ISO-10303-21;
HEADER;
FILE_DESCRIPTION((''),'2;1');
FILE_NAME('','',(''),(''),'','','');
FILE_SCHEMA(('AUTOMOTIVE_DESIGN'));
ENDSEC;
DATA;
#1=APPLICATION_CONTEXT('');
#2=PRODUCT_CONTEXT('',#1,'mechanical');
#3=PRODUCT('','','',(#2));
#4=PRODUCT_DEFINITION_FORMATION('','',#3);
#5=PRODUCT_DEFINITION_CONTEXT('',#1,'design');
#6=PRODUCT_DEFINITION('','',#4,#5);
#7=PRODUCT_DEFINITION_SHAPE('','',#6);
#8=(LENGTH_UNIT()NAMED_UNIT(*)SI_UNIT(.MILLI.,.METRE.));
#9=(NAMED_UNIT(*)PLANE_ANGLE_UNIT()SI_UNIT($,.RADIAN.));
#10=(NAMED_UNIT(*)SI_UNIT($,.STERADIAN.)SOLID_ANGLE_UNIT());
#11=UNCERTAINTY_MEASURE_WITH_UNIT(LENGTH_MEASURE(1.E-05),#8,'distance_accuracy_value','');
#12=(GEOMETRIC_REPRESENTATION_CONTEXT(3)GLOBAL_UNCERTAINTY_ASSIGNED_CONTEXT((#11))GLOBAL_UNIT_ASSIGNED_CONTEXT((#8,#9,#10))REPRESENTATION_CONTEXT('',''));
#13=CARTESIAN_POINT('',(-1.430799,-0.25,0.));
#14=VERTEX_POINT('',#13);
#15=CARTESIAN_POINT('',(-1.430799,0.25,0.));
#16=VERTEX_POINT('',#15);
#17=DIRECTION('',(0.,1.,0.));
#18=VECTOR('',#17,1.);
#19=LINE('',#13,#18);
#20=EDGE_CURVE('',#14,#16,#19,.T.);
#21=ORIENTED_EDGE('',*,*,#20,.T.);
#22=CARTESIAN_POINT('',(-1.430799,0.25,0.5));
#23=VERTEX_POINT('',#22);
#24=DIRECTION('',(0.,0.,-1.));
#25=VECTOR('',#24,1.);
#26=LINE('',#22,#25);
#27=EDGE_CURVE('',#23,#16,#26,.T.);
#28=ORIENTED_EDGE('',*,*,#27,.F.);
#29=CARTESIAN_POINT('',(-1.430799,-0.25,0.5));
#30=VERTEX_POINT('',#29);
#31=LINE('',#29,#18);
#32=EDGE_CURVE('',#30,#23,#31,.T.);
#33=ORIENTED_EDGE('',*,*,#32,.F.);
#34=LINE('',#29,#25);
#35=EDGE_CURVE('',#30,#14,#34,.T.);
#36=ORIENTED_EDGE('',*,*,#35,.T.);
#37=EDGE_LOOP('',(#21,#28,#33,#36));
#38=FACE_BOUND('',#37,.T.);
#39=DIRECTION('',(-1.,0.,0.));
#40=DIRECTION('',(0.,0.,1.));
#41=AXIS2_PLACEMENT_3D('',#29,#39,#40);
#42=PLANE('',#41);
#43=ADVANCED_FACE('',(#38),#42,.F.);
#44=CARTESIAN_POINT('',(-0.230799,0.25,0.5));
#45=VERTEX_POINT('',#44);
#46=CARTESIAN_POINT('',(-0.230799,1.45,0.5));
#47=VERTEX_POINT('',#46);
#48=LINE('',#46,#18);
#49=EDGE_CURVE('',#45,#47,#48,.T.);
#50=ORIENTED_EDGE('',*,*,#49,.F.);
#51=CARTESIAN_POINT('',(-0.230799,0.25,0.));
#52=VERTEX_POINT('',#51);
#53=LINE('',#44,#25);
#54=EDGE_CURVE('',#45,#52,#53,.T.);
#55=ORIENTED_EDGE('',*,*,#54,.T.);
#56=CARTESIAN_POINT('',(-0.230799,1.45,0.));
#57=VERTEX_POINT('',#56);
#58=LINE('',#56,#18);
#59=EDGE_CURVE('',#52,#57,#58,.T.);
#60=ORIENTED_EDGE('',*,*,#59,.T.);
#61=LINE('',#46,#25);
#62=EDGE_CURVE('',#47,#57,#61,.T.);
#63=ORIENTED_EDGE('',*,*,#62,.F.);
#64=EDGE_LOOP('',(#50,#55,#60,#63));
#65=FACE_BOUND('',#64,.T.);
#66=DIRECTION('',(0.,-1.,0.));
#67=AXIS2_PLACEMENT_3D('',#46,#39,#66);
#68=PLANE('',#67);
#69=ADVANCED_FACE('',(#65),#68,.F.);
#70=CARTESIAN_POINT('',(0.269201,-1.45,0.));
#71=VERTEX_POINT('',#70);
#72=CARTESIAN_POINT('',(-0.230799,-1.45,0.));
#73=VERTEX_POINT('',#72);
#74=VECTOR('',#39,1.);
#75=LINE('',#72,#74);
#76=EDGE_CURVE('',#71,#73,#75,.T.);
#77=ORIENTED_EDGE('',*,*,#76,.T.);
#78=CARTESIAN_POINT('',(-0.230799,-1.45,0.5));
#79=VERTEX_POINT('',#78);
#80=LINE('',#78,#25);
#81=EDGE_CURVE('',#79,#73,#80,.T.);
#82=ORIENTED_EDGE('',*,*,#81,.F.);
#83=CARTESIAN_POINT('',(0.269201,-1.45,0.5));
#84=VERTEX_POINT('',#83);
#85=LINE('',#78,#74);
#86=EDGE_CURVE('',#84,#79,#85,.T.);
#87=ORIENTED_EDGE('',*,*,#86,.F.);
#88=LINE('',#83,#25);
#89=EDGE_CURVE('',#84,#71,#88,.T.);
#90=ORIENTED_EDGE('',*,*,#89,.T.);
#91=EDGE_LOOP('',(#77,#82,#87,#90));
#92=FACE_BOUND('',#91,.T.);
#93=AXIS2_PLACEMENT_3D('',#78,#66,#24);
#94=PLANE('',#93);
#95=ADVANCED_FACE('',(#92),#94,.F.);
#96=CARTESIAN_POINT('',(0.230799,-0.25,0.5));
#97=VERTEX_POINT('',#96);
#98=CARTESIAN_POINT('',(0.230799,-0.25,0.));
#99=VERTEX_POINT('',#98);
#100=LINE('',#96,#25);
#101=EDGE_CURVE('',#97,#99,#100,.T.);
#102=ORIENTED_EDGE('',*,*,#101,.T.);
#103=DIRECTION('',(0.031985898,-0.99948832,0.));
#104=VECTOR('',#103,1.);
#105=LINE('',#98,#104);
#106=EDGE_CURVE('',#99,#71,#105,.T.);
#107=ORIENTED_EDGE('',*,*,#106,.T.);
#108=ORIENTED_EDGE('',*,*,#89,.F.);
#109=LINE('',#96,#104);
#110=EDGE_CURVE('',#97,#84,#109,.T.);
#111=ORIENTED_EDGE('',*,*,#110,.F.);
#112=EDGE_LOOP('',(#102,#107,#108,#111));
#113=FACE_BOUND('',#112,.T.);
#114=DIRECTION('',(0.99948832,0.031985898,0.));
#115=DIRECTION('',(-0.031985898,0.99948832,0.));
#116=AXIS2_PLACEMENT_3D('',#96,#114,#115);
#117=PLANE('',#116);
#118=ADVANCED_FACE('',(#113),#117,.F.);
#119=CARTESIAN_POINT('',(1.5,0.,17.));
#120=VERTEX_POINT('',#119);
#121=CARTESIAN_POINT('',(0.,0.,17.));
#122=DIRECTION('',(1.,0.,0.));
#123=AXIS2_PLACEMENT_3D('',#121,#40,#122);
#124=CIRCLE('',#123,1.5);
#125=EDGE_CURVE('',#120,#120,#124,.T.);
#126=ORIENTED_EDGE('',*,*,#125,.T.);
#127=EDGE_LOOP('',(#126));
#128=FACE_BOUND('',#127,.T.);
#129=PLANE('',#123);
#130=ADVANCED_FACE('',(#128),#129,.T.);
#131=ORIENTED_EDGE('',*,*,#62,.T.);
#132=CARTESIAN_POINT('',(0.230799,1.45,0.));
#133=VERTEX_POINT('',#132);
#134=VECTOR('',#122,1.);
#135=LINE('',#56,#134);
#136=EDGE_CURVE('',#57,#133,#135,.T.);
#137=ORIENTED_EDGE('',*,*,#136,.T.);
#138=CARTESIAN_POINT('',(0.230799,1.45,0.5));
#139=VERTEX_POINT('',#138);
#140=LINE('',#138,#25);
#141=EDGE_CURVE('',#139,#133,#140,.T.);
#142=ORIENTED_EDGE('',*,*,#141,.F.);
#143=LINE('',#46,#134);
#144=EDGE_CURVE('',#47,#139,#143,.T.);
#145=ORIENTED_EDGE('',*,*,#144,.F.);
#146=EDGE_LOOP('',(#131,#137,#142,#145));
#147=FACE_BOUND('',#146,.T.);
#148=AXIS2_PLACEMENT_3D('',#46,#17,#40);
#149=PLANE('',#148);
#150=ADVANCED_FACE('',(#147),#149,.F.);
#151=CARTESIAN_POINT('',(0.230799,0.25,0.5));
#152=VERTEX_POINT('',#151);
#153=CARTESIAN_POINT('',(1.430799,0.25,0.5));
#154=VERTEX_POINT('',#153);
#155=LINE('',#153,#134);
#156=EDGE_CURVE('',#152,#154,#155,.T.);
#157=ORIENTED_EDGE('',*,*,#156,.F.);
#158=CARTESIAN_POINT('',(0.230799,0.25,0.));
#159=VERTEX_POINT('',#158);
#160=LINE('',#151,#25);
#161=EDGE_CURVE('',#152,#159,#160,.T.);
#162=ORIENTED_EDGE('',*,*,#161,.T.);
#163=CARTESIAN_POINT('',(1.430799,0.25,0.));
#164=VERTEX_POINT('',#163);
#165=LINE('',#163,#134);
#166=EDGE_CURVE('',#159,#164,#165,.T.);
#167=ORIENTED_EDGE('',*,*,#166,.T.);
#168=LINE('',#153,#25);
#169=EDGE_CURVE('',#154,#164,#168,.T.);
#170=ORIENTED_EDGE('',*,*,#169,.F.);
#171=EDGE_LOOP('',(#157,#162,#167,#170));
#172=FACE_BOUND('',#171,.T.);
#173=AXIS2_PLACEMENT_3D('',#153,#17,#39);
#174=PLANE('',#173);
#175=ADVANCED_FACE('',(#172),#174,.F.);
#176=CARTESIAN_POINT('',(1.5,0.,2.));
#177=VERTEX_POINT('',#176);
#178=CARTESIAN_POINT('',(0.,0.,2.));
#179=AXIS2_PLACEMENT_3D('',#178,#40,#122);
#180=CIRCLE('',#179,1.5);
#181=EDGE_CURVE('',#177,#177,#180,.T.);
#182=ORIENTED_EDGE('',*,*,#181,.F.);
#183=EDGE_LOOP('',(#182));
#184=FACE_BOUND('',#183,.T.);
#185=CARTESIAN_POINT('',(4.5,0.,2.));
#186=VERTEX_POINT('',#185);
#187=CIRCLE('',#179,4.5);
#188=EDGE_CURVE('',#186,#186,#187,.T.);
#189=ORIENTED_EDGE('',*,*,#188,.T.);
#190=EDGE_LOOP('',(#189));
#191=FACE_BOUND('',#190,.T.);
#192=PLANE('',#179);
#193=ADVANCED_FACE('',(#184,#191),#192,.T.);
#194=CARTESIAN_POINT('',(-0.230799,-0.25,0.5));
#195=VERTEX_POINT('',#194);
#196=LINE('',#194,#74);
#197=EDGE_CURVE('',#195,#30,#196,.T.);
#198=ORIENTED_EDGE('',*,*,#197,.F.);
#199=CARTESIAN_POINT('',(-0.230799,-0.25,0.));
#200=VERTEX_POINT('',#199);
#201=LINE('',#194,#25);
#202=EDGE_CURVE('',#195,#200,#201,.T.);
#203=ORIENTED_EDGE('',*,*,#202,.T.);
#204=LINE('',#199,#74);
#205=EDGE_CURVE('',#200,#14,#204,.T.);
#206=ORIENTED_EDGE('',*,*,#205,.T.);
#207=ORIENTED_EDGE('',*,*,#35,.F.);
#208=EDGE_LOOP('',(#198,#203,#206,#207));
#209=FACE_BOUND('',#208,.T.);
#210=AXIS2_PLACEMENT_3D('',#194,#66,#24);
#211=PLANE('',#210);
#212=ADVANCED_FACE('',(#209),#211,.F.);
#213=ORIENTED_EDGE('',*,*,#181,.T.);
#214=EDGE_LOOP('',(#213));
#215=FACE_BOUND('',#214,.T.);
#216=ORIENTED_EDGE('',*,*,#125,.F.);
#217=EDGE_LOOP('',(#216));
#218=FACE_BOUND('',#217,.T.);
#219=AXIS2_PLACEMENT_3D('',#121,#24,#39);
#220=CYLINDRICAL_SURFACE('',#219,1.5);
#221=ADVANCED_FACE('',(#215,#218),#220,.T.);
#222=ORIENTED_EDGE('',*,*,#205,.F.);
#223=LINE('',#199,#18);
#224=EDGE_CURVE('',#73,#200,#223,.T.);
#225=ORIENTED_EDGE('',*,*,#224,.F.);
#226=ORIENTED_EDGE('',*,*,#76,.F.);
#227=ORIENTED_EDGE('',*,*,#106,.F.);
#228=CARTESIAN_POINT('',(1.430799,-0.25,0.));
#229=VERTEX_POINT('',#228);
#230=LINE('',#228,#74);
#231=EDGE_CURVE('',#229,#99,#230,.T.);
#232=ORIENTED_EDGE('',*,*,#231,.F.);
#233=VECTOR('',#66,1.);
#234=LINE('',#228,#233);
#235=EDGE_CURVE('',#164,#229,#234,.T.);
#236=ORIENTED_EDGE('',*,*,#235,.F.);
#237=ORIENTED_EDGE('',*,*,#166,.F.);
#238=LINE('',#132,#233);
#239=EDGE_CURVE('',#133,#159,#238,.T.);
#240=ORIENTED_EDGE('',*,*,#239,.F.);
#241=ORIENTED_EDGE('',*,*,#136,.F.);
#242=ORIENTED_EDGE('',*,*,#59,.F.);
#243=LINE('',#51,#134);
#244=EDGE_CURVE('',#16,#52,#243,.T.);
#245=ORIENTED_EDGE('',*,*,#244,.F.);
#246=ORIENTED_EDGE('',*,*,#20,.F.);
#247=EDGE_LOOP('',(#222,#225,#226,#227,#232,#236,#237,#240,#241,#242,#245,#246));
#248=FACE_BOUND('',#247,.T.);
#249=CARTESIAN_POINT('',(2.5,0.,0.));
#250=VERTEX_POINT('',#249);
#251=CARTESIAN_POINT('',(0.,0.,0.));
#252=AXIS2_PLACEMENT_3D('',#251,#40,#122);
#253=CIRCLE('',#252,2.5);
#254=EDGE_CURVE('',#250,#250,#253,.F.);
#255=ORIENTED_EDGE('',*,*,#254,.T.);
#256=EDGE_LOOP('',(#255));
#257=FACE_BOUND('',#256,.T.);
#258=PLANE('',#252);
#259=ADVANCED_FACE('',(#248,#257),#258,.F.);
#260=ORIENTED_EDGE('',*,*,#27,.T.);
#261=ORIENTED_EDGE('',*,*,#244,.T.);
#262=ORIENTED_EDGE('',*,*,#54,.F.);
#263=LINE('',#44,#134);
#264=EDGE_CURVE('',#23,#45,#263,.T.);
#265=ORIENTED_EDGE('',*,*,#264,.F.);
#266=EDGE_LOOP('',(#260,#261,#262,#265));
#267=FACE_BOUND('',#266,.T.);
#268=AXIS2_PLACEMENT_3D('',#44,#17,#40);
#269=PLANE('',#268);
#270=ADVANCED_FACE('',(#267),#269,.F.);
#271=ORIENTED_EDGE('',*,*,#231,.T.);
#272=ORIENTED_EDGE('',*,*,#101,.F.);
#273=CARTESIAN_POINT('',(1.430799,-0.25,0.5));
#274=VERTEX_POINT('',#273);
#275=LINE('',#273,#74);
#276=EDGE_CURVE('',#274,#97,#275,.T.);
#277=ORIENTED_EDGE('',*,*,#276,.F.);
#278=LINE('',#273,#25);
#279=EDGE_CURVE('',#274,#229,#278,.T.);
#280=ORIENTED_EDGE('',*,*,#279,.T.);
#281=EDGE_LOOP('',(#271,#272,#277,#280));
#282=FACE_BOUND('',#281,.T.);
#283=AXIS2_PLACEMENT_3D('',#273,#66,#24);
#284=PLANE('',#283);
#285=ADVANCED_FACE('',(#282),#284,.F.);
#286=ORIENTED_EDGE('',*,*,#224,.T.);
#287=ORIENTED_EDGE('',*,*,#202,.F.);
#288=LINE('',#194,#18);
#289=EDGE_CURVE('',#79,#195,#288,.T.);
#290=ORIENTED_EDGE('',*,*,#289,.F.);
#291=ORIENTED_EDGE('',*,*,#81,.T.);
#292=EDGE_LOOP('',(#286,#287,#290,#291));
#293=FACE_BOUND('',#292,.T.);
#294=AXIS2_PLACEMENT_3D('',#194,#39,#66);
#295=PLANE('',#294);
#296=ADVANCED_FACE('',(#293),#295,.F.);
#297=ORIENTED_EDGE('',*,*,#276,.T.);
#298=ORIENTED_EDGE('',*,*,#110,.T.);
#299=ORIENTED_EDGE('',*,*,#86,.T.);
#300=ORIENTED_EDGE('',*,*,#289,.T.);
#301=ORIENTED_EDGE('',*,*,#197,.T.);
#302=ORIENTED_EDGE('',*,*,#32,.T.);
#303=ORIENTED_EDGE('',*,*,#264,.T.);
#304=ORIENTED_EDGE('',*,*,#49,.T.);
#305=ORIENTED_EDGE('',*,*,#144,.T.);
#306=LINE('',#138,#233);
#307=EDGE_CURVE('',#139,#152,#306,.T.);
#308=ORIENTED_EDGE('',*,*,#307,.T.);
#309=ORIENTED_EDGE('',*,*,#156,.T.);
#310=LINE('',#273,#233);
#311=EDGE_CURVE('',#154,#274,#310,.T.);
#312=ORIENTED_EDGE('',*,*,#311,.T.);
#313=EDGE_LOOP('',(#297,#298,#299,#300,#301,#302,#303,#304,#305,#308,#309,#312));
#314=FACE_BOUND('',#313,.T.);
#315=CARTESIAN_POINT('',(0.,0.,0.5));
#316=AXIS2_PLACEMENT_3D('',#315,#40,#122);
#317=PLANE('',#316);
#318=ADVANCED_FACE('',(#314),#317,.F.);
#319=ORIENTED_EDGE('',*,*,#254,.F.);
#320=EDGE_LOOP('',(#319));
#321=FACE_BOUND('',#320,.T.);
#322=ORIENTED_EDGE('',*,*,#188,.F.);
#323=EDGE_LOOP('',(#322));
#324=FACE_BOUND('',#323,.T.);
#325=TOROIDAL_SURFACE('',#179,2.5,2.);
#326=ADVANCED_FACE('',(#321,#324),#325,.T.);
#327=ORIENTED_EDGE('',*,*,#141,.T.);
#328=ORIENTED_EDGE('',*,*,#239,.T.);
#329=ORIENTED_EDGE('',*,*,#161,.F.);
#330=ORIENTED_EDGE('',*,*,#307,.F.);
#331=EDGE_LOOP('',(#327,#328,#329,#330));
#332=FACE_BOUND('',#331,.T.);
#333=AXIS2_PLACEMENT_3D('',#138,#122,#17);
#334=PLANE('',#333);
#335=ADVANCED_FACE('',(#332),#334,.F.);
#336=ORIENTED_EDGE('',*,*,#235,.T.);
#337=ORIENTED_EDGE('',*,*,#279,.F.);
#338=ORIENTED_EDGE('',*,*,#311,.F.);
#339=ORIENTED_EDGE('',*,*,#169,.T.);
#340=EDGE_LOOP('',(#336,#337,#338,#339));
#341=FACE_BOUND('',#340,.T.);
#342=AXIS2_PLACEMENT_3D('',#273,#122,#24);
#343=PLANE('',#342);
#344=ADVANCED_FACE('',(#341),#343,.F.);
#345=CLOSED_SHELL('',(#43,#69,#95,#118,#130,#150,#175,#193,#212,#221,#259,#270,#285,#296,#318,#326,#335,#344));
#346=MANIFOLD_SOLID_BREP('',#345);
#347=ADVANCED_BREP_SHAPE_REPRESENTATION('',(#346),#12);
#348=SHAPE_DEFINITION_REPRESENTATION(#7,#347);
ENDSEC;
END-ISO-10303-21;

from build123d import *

# Parameters (mm, degrees)
SKETCH1_R           = 4.5
BOSS_EXTRUDE1_DEPTH = 2
FILLET1_R           = 2
CUT_EXTRUDE1_DEPTH  = 0.5
SKETCH3_R           = 1.5
BOSS_EXTRUDE2_DEPTH = 15


with BuildPart() as part:
    # Sketch1 → Boss-Extrude1 (new body)
    with BuildSketch(Plane.XY):
        Circle(SKETCH1_R)
    extrude(amount=BOSS_EXTRUDE1_DEPTH)

    # Fillet1
    fillet1_edges = [part.edges().sort_by_distance(p)[0] for p in [
        (-4.5, 0, 0),
    ]]
    fillet(fillet1_edges, radius=FILLET1_R - 0.0001)  # a hair under: the kernel refuses the full size

    # Sketch2 → Cut-Extrude1 (cut)
    with BuildSketch(Plane(origin=(0, 0, 0), x_dir=(-1, 0, 0), z_dir=(0, 0, -1))):
        Polygon((0.230798636, -0.25), (0.230798636, -1.45), (-0.269201364, -1.45), (-0.230798636, -0.25), (-1.430798636, -0.25), (-1.430798636, 0.25), (-0.230798636, 0.25), (-0.230798636, 1.45), (0.230798636, 1.45), (0.230798636, 0.25), (1.430798636, 0.25), (1.430798636, -0.25), align=None)
    extrude(amount=-CUT_EXTRUDE1_DEPTH, mode=Mode.SUBTRACT)

    # Sketch3 → Boss-Extrude2 (add)
    with BuildSketch(Plane.XY.offset(2)):
        Circle(SKETCH3_R)
    extrude(amount=BOSS_EXTRUDE2_DEPTH)


solid = part.part
